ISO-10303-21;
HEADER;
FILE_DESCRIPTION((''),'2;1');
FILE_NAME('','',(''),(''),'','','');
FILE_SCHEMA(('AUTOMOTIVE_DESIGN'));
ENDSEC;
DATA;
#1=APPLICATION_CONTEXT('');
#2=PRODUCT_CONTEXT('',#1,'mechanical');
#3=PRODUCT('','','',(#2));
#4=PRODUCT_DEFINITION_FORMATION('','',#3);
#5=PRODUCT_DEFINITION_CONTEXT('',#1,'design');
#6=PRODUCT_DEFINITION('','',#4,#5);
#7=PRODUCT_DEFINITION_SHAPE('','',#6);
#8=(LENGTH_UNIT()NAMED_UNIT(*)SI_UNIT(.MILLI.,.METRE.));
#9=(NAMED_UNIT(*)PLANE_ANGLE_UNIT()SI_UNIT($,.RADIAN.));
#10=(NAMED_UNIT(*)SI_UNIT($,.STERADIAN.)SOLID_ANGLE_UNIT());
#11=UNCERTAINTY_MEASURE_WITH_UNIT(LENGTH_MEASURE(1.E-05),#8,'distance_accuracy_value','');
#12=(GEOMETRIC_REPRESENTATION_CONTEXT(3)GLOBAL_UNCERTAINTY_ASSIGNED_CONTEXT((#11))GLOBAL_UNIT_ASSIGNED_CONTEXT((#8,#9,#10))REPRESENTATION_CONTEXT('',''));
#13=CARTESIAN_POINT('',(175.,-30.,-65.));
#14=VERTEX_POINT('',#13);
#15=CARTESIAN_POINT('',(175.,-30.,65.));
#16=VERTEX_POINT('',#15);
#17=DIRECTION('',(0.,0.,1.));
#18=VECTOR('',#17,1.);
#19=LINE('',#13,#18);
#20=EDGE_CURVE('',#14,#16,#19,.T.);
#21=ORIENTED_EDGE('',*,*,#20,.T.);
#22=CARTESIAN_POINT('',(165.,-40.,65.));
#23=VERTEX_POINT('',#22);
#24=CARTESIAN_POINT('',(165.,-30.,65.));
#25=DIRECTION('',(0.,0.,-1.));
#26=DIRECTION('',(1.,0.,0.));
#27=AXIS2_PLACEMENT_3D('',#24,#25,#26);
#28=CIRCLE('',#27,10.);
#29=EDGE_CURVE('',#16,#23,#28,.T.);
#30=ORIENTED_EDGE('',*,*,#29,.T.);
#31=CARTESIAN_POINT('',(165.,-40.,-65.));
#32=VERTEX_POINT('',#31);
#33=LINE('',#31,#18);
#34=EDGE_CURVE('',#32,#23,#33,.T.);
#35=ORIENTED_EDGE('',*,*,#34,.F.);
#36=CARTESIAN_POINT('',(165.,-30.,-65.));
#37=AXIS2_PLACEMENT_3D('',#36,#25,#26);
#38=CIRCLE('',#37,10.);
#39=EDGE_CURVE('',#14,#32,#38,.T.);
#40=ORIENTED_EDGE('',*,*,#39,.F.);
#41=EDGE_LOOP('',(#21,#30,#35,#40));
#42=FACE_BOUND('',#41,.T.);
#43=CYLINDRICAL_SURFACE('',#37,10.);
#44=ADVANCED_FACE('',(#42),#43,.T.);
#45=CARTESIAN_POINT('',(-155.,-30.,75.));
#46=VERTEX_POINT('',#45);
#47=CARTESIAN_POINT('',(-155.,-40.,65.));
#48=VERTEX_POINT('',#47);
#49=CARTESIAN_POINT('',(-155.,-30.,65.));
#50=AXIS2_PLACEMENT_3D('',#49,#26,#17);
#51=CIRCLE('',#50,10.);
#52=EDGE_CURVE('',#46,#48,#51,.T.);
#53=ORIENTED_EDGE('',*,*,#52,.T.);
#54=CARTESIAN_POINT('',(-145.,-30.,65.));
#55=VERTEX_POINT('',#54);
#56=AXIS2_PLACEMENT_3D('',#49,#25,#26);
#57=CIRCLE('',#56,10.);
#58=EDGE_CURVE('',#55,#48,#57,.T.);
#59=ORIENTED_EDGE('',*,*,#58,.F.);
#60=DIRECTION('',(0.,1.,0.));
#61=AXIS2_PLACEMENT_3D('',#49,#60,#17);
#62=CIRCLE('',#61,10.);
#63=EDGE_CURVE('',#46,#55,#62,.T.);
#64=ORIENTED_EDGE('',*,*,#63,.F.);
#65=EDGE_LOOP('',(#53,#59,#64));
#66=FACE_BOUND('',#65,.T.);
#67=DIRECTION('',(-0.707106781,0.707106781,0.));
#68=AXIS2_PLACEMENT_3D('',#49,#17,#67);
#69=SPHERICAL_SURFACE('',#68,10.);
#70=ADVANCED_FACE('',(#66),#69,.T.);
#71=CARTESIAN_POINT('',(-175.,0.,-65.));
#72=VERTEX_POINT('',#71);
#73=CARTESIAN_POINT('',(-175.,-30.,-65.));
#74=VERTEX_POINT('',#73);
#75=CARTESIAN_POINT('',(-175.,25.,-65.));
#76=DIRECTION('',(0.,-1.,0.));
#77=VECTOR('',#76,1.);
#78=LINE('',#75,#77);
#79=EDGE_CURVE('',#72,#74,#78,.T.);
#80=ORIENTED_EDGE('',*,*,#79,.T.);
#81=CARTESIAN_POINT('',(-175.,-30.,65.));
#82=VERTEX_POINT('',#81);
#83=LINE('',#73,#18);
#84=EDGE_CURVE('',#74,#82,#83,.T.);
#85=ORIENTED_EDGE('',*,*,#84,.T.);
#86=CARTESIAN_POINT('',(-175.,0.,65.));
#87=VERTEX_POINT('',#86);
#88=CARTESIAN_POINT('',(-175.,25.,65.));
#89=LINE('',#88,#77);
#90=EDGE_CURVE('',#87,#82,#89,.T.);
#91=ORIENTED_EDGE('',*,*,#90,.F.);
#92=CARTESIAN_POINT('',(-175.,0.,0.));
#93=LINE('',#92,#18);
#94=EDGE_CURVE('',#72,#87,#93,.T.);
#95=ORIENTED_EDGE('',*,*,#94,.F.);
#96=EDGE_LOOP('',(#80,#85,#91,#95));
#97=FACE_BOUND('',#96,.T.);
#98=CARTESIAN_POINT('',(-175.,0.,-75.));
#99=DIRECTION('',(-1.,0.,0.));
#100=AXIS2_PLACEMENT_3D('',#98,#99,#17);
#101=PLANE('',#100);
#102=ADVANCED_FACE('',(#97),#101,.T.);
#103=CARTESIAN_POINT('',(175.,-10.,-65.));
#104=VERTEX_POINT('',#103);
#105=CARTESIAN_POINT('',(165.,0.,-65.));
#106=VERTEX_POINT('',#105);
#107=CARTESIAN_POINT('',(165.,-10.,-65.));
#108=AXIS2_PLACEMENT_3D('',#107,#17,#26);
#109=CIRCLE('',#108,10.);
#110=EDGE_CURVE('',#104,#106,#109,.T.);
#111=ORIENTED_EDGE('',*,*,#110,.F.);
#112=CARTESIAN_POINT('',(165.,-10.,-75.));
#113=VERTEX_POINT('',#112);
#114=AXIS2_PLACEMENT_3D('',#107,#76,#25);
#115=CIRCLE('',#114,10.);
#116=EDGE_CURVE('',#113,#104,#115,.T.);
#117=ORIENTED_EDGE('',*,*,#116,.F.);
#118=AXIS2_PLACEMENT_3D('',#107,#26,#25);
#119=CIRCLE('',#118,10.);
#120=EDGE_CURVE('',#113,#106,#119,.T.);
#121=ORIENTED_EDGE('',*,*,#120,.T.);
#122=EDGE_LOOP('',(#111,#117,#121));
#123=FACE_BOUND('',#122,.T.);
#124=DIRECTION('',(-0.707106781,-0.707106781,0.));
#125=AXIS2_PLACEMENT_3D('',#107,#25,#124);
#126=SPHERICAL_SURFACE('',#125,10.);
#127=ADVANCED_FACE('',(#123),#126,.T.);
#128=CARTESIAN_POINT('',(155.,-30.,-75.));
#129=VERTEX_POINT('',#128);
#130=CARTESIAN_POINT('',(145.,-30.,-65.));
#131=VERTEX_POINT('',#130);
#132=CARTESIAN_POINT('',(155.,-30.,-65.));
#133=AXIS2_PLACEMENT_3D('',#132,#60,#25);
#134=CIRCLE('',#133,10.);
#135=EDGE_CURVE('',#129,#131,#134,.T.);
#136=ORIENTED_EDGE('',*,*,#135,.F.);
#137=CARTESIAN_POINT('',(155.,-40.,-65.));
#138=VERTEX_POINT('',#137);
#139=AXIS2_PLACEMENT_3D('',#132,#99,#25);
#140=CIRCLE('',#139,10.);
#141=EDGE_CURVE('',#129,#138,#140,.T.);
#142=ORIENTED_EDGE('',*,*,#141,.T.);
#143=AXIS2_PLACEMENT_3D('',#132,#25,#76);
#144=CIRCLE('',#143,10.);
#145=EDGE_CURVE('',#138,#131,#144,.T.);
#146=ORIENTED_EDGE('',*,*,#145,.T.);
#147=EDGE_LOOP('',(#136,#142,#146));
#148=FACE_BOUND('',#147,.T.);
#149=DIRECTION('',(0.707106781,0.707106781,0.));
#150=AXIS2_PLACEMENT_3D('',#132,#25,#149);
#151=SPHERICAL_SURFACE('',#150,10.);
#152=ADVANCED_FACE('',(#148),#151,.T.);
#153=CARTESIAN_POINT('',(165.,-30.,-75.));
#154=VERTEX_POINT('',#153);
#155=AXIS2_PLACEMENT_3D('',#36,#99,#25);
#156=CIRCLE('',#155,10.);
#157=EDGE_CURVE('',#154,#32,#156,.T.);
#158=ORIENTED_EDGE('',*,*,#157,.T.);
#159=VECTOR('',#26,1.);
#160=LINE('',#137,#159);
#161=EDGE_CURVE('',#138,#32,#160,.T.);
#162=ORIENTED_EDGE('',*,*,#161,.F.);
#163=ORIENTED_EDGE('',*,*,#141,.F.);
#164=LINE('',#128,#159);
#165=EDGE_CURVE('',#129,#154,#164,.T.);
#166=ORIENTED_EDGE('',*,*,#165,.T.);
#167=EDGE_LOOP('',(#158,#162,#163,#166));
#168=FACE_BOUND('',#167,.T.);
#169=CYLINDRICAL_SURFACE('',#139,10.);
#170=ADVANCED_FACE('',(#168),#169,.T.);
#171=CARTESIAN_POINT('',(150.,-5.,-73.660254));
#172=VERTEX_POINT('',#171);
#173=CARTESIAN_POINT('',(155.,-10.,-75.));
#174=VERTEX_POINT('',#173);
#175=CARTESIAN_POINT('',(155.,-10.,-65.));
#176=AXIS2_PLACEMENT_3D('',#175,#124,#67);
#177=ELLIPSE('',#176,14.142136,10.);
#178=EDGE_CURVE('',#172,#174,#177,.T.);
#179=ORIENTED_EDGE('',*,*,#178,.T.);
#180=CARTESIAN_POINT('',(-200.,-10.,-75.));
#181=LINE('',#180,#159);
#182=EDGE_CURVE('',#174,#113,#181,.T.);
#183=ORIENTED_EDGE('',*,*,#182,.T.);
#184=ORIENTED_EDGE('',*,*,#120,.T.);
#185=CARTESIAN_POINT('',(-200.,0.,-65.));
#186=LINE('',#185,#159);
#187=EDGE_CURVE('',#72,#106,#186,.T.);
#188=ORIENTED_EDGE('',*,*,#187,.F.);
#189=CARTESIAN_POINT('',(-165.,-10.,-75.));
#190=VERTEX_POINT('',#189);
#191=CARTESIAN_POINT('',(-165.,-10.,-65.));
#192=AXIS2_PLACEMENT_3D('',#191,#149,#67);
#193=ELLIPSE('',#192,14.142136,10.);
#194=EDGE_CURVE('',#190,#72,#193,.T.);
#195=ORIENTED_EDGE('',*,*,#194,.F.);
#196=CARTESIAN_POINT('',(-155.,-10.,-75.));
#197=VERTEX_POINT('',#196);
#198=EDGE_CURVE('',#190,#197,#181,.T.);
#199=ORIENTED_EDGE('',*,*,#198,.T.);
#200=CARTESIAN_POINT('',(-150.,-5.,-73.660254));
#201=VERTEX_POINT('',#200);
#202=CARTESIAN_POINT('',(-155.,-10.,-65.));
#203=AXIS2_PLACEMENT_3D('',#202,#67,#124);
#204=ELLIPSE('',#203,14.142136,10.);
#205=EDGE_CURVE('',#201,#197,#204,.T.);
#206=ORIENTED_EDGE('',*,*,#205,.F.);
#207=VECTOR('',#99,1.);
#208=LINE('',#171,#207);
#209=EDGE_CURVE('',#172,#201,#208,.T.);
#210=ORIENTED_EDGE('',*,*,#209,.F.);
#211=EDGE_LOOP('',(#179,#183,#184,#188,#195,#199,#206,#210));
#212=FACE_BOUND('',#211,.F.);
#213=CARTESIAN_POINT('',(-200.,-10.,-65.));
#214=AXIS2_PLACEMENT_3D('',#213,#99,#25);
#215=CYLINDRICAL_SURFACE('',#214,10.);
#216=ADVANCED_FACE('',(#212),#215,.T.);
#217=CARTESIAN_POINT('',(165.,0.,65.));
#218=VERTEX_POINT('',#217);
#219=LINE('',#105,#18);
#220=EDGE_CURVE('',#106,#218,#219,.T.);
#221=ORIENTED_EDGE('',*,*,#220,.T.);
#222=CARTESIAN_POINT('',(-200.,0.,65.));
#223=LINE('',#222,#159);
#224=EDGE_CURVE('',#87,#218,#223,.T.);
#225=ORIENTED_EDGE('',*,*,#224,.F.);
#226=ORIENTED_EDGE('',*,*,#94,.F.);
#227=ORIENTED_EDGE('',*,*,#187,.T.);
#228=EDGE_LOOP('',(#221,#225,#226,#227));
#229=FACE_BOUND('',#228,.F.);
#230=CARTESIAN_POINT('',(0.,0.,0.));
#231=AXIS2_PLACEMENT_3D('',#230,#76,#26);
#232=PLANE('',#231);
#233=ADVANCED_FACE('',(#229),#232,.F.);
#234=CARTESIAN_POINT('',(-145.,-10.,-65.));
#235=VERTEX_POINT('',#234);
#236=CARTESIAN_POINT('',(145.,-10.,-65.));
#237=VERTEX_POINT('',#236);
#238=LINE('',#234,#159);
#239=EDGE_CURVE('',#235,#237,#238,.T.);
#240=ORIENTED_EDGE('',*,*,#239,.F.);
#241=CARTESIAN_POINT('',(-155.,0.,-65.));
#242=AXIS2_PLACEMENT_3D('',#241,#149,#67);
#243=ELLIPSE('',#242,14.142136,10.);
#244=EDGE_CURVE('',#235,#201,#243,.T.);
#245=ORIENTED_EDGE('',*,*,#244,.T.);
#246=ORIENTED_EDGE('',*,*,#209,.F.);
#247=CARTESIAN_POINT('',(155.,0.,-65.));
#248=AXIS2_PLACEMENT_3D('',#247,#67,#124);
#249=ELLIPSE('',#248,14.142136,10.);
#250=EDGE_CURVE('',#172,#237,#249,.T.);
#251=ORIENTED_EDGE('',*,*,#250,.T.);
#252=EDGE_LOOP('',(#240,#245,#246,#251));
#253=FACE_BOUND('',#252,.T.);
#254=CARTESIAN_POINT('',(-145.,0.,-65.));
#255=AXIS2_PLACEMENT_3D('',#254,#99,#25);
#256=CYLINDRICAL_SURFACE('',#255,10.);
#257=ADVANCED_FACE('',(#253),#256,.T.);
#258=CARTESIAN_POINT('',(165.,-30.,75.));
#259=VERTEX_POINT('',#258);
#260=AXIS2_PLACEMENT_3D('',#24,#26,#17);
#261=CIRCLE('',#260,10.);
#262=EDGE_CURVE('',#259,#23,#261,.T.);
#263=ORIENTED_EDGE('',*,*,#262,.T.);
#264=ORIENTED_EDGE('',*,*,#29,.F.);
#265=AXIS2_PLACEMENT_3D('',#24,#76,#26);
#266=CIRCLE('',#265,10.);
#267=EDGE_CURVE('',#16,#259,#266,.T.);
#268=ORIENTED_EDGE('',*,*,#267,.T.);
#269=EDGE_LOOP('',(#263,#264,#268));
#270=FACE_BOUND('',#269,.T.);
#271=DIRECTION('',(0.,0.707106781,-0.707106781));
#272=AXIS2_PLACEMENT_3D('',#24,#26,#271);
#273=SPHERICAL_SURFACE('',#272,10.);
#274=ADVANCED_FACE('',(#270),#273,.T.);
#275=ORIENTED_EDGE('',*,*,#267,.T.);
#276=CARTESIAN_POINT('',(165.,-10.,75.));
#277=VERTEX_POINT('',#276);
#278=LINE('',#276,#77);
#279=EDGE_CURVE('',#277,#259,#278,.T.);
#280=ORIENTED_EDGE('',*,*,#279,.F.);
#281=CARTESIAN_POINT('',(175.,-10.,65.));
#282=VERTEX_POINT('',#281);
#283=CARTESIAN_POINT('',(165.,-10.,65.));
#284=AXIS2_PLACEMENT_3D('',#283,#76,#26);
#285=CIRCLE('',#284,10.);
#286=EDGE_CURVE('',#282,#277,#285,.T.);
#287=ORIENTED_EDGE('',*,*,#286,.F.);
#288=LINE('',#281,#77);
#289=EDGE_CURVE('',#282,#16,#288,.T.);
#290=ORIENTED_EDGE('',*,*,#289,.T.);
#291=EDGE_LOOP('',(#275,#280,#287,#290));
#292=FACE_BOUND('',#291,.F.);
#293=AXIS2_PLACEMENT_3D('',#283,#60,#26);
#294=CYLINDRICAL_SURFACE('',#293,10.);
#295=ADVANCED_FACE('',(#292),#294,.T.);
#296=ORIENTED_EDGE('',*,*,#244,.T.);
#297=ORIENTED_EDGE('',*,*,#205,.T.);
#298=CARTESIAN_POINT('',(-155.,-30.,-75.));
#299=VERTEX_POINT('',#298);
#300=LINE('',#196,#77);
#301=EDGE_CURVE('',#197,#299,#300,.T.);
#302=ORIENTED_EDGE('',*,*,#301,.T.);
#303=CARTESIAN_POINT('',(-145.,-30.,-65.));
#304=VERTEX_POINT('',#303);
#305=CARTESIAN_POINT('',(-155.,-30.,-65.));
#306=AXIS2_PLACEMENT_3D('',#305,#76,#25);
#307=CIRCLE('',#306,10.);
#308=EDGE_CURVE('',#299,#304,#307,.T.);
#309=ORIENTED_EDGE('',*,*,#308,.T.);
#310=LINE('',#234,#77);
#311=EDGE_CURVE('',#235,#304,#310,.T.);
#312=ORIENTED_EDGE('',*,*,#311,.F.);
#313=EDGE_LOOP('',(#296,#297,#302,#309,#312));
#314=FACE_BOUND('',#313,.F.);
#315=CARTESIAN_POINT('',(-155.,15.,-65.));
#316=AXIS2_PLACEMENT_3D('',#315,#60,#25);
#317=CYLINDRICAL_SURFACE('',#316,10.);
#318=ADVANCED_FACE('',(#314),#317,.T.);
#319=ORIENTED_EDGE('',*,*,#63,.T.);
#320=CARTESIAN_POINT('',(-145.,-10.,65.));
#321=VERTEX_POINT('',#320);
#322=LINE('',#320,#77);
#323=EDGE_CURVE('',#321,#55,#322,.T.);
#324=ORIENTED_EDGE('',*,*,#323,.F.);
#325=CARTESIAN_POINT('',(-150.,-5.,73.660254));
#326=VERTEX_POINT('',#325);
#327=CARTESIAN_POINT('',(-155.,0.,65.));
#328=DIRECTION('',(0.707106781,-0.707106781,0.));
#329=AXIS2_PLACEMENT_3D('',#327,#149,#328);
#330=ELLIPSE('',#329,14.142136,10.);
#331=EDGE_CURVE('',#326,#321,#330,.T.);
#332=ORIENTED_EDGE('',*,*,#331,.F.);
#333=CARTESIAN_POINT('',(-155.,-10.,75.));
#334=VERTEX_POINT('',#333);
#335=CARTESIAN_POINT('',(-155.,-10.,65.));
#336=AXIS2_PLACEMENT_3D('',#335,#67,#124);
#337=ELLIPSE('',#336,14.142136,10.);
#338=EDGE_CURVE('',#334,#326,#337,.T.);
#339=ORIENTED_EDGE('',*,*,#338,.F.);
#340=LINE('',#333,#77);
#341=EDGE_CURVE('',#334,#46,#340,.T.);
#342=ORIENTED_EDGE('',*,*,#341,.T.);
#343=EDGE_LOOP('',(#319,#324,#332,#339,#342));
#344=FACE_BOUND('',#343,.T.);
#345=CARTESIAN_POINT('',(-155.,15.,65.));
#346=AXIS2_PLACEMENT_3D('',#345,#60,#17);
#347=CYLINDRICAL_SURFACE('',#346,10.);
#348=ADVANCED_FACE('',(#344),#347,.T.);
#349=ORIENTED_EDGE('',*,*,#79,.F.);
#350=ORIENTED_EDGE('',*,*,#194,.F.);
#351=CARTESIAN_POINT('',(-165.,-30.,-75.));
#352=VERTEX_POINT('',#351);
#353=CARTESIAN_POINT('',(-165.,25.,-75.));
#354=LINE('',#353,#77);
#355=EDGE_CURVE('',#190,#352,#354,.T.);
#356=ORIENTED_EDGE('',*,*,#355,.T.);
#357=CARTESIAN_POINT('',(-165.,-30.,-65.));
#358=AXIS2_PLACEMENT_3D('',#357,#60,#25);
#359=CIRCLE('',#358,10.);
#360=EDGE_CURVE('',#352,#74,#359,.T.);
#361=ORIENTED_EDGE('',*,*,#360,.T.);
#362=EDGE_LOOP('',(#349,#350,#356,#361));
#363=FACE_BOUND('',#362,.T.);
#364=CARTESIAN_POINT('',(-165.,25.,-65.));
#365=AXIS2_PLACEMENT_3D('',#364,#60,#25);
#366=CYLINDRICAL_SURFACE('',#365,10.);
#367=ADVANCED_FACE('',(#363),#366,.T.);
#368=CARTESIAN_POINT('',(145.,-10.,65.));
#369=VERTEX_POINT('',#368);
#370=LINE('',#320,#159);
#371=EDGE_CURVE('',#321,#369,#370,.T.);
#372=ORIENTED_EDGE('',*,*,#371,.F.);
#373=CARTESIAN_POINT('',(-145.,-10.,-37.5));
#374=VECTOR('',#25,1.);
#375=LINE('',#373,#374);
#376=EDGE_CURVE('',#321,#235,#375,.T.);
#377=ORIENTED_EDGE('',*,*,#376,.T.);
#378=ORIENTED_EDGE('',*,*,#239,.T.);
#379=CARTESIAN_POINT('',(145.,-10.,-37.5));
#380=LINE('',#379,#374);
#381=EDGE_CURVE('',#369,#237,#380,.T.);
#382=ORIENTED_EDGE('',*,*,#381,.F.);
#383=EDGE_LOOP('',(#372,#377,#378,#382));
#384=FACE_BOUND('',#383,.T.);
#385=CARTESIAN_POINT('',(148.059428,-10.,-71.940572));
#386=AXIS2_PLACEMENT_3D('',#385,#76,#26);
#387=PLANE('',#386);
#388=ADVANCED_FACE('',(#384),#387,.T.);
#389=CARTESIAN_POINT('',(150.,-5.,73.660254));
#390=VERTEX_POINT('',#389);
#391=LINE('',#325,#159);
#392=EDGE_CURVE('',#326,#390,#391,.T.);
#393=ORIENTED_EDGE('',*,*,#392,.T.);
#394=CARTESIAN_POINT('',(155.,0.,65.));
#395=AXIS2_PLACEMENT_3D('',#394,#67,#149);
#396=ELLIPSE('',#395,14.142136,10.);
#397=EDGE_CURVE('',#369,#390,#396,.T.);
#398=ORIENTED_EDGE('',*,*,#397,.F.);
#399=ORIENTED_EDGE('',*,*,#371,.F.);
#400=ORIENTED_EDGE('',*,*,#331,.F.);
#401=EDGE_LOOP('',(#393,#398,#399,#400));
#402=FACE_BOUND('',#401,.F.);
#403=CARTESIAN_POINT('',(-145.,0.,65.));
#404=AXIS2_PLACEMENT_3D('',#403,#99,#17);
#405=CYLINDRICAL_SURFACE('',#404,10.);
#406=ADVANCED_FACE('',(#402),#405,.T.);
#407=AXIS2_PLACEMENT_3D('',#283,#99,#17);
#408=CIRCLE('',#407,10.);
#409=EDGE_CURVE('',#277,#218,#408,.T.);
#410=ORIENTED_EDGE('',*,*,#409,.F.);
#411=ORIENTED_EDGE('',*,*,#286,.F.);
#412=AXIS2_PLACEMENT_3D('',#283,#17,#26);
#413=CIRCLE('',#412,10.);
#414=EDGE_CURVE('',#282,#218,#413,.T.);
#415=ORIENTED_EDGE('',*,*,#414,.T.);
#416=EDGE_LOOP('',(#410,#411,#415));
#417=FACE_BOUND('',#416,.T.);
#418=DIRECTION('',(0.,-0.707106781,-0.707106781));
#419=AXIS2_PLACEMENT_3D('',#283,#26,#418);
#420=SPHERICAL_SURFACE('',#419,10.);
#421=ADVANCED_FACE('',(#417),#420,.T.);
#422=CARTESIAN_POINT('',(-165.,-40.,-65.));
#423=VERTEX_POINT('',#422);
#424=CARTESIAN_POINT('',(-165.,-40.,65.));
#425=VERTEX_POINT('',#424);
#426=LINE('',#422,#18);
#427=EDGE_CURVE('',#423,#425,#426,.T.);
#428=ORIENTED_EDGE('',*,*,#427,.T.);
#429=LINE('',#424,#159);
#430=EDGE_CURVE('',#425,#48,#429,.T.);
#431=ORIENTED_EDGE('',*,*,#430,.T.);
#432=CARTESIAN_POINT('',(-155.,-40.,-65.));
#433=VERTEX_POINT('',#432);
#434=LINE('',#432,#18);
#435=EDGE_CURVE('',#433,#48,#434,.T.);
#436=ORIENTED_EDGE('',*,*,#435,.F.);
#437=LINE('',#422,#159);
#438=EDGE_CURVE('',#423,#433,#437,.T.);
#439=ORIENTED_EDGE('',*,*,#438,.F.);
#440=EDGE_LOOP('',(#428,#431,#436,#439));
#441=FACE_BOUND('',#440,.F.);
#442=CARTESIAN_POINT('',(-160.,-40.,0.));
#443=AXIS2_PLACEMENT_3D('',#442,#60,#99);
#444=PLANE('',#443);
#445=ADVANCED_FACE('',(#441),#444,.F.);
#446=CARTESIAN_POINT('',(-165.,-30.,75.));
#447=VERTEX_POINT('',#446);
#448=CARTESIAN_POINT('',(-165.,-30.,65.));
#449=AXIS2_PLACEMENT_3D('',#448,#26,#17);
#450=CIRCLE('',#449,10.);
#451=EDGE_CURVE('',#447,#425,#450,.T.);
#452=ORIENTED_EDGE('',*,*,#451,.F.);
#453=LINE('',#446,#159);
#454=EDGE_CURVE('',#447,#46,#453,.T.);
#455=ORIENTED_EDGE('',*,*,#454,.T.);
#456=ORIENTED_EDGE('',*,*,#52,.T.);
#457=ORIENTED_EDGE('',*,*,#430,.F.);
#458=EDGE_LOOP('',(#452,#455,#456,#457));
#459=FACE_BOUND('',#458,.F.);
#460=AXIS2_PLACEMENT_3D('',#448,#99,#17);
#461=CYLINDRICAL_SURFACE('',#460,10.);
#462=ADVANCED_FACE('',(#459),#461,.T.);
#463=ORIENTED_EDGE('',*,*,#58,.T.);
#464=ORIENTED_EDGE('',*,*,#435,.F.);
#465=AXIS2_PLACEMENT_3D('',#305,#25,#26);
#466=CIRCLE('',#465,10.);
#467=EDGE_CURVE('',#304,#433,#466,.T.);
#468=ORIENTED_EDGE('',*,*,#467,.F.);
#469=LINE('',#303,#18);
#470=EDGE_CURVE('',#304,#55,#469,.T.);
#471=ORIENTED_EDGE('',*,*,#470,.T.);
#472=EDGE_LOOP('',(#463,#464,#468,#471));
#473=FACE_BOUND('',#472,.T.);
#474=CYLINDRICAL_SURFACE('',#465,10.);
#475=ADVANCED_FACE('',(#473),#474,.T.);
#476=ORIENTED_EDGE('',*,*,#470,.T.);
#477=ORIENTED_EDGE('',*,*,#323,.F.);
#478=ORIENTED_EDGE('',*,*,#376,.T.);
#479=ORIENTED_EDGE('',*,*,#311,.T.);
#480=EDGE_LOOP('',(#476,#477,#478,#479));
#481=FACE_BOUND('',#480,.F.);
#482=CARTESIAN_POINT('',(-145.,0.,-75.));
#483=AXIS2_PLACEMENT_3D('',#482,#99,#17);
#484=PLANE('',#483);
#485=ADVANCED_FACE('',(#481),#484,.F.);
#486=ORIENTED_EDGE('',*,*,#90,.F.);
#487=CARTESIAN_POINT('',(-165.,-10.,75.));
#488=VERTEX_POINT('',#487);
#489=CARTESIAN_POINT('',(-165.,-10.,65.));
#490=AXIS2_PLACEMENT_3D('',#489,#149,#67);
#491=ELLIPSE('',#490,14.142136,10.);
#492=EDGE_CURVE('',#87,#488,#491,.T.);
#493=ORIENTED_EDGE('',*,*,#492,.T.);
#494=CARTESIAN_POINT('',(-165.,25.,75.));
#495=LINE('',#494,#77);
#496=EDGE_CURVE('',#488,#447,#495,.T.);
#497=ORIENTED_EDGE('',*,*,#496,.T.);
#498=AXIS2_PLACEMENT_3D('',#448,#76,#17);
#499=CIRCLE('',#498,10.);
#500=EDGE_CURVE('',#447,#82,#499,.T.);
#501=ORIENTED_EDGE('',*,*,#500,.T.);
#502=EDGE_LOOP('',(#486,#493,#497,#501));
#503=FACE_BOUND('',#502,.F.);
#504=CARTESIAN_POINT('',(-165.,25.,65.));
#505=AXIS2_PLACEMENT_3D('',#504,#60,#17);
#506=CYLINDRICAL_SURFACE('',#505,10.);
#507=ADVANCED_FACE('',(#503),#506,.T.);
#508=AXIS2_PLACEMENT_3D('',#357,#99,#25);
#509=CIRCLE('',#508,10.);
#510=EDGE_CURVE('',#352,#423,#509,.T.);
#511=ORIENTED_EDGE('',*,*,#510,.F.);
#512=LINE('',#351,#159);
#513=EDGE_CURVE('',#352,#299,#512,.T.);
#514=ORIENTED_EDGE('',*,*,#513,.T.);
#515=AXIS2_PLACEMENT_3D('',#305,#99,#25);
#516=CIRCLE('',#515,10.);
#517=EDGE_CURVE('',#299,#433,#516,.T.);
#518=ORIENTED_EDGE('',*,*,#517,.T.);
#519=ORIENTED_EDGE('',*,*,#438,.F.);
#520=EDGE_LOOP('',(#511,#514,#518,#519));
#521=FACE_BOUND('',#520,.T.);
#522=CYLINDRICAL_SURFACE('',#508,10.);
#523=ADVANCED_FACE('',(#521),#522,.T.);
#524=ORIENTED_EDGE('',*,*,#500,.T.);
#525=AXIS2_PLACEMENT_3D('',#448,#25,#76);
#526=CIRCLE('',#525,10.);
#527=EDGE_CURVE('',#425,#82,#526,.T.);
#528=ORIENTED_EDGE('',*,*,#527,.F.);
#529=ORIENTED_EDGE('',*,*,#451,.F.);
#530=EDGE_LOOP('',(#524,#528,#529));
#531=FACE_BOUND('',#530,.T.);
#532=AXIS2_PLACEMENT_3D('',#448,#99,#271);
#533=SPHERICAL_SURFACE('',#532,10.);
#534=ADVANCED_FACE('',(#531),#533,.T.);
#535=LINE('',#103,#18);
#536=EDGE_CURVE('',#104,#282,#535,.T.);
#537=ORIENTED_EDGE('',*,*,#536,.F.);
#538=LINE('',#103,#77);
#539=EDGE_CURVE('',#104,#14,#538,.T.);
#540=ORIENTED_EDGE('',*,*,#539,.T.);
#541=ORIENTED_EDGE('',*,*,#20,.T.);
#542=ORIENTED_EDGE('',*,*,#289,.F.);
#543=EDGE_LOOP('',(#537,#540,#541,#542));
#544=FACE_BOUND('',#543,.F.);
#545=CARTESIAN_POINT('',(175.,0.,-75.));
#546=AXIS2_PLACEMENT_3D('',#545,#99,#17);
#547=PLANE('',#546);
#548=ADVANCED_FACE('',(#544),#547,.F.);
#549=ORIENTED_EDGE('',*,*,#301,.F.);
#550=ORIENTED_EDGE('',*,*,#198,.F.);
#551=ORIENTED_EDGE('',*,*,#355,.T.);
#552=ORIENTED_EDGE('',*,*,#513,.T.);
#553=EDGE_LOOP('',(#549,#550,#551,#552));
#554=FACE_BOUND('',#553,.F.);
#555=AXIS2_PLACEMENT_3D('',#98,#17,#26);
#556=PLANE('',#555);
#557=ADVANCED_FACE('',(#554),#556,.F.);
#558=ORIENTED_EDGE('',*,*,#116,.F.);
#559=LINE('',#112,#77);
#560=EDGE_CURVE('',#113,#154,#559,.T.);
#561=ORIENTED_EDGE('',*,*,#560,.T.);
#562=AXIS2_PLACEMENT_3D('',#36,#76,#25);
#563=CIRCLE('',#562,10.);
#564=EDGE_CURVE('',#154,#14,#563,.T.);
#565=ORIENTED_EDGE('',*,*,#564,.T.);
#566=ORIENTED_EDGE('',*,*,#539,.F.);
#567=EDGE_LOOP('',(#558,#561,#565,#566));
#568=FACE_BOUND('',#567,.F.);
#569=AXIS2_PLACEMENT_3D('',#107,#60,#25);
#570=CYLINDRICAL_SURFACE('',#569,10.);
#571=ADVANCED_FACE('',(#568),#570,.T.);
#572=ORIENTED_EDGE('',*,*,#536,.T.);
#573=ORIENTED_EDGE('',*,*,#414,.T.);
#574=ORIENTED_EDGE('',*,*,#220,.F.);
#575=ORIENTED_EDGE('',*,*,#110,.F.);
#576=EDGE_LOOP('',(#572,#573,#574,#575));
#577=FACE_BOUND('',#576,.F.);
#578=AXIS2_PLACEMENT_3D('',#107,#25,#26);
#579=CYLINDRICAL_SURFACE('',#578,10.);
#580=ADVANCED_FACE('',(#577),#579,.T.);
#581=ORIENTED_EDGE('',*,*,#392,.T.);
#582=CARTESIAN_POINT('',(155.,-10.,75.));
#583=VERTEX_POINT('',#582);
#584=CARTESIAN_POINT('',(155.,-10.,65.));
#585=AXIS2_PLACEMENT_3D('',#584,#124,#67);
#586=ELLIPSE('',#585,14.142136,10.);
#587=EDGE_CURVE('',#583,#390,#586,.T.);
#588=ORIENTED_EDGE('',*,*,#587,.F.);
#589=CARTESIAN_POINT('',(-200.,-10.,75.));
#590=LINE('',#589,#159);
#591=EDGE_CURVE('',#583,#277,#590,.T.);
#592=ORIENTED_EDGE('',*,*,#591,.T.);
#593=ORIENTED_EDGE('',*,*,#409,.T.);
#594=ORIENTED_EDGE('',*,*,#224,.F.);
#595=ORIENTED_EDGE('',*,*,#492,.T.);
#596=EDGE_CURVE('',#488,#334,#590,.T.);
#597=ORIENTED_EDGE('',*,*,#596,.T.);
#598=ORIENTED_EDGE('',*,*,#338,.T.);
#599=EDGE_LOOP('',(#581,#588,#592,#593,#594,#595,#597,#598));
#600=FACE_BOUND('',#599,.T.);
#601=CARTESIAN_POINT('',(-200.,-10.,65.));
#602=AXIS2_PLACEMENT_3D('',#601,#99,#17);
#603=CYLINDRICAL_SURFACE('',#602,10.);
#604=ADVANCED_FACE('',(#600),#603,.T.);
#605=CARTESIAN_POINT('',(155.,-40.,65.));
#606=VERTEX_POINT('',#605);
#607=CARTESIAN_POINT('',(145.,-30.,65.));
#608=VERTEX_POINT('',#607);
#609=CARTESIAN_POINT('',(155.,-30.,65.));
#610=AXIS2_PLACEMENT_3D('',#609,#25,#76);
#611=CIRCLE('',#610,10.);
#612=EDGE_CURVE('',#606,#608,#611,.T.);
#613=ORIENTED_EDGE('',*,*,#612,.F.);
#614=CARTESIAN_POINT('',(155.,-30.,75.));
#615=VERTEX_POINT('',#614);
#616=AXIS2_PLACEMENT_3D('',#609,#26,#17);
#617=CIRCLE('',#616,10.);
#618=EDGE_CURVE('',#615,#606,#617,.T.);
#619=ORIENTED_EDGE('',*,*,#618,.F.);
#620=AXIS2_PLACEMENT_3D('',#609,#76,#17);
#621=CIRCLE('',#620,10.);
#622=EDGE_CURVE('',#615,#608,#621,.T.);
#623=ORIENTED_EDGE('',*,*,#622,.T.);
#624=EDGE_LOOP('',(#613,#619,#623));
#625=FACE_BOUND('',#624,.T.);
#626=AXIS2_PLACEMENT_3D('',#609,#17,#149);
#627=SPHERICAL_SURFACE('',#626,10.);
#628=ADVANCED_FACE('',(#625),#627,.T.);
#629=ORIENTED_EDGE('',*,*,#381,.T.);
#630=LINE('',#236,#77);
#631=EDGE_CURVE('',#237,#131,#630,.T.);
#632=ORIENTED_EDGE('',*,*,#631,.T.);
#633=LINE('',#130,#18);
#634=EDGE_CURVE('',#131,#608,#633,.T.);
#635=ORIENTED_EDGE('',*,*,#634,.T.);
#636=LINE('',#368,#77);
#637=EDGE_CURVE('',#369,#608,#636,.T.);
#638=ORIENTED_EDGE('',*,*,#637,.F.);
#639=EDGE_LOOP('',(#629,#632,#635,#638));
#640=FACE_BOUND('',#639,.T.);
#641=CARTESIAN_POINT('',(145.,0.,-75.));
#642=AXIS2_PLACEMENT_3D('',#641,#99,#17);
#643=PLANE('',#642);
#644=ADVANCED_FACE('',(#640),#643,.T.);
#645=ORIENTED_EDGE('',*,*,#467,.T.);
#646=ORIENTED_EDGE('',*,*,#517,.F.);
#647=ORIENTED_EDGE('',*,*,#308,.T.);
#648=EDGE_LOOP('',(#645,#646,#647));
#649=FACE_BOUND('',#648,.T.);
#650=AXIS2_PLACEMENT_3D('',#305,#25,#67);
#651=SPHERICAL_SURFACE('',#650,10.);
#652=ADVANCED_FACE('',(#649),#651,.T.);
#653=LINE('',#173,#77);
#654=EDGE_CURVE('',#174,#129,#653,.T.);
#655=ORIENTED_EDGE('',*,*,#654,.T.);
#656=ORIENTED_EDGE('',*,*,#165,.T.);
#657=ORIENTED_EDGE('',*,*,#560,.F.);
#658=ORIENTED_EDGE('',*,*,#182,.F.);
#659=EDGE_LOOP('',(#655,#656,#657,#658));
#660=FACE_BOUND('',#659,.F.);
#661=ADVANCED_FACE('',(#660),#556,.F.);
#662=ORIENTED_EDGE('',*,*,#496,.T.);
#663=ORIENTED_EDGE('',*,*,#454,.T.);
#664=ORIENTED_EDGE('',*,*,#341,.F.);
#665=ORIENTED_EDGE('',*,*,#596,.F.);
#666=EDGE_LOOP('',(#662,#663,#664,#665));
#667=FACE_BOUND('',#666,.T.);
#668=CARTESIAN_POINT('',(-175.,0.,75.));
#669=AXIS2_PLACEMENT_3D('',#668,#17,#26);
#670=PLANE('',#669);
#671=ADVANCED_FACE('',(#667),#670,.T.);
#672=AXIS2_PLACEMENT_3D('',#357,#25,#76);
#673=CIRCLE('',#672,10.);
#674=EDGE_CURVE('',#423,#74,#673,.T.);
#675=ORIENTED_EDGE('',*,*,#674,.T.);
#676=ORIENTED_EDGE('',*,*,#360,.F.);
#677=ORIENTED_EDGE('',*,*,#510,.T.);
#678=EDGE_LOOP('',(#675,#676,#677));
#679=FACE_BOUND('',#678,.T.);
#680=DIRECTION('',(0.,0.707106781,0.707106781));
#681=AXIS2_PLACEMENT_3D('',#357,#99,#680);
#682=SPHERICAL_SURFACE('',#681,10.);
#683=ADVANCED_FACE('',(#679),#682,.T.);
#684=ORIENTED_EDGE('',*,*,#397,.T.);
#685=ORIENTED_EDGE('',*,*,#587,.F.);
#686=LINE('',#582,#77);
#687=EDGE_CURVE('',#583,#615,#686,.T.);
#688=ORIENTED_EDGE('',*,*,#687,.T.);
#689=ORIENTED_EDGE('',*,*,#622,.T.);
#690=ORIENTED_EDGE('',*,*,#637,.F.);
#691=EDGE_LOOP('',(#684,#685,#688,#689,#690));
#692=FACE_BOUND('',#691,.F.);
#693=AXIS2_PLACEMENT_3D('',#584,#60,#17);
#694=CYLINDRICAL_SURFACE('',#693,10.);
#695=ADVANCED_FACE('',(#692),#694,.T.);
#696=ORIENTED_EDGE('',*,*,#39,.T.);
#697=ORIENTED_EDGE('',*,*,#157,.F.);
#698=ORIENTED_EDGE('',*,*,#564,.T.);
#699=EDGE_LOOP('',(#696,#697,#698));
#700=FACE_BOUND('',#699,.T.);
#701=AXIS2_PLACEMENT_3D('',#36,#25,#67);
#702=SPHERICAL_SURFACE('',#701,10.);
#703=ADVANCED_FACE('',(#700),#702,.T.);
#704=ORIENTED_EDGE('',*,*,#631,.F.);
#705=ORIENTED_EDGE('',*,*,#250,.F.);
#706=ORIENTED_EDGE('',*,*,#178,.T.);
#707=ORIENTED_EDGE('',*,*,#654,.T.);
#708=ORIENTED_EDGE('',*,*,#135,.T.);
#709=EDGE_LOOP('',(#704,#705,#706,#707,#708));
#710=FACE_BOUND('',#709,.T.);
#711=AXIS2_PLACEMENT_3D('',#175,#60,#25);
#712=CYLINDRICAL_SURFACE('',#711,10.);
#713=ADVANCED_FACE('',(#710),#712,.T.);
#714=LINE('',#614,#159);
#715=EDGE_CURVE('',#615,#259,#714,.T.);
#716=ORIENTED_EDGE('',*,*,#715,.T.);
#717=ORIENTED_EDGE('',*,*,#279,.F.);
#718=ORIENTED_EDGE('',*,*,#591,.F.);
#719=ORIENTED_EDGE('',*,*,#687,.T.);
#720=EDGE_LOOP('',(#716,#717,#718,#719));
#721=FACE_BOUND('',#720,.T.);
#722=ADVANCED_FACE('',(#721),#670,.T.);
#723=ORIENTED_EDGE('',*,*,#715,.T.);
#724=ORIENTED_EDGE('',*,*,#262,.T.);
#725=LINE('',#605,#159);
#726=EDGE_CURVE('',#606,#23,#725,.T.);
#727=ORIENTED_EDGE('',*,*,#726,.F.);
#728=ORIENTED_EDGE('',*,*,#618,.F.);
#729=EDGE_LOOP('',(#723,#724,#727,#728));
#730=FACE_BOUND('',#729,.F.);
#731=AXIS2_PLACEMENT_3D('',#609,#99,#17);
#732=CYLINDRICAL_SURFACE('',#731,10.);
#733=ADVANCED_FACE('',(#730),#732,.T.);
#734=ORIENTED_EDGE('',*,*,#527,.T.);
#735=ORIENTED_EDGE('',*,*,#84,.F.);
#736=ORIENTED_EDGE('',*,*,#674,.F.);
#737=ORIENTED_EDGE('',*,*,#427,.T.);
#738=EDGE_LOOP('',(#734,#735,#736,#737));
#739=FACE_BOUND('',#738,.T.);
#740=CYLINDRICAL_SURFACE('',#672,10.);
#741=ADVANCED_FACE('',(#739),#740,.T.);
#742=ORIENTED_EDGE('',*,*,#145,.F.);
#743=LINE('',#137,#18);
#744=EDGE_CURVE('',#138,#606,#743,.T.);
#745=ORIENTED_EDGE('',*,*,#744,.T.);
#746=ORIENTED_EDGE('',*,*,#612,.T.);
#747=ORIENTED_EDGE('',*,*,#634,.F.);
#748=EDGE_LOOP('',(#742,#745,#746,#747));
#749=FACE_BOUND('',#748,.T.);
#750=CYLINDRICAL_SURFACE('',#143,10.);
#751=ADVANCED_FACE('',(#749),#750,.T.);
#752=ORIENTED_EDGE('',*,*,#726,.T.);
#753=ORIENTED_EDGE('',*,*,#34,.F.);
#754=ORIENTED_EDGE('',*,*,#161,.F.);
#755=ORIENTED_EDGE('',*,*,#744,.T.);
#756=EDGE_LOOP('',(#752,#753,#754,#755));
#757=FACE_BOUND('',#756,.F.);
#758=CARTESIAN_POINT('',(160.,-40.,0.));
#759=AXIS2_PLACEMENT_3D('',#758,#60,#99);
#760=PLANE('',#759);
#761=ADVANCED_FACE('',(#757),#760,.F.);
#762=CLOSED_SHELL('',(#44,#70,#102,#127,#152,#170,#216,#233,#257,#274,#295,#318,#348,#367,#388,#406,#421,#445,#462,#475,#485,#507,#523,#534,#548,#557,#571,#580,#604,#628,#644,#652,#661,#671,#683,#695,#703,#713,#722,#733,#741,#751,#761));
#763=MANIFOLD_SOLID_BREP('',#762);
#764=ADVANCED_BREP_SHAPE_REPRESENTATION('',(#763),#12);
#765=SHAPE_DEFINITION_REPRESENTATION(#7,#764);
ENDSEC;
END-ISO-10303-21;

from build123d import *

# Parameters (mm, degrees)
F0_W          = 350
F0_H          = 150
F1_DEPTH      = 10
F2_W          = 30
F2_H          = 150
F3_DEPTH      = 40
F4_T1_DEPTH   = 10
F4_T3_DEPTH   = 20
F4_T5_DEPTH   = 130
F4_T7_DEPTH   = 55
F4_T9_DEPTH   = 365
F4_T11_DEPTH  = 290
F4_T13_DEPTH  = 10
F4_S17_W      = 10.2
F4_S17_H      = 10.2
F4_T18_DEPTH  = 10.2
F4_S23_W      = 10.2
F4_S23_H      = 10.2
F4_T24_DEPTH  = 10.2
F4_S29_W      = 10.2
F4_S29_H      = 10.2
F4_T30_DEPTH  = 10.2
F4_S35_W      = 10.2
F4_S35_H      = 10.2
F4_T36_DEPTH  = 10.2
F4_S41_W      = 10.2
F4_S41_H      = 10.2
F4_T42_DEPTH  = 10.2
F4_S47_W      = 10.2
F4_S47_H      = 10.2
F4_T48_DEPTH  = 10.2
F4_S53_W      = 10.2
F4_S53_H      = 10.2
F4_T54_DEPTH  = 10.2
F4_S59_W      = 10.2
F4_S59_H      = 10.2
F4_T60_DEPTH  = 10.2
F4_S65_W      = 10.2
F4_S65_H      = 10.2
F4_T66_DEPTH  = 10.2
F4_S71_W      = 10.2
F4_S71_H      = 10.2
F4_T72_DEPTH  = 10.2
F4_T79_DEPTH  = 45
F4_T84_DEPTH  = 315
F4_T91_DEPTH  = 315
F4_T95_DEPTH  = 45
F4_T103_DEPTH = 45
F4_T108_DEPTH = 315
F4_T115_DEPTH = 315
F4_T119_DEPTH = 45


# Not quite as in the source:
# - a fillet or chamfer that OpenCascade refuses, or shapes differently, is made with other operations: its cross-section is extruded or revolved along the edge and cut away or added


with BuildPart() as f1:
    # F0 (on Front) → F1 (new body)
    with BuildSketch(Plane.XZ):
        Rectangle(F0_W, F0_H)
    extrude(amount=F1_DEPTH)

    # F2 (on face) → F3 (join)
    with BuildSketch(Plane(origin=(0, 0, 0), x_dir=(-1, 0, 0), z_dir=(0, 1, 0))):
        with Locations((-160, 0)):
            Rectangle(F2_W, F2_H)
        with Locations((160, 0)):
            Rectangle(F2_W, F2_H)
    extrude(amount=-F3_DEPTH)

    # F4: fillet of radius 10 on 21 edges, made by hand

    # F4_s2 → F4_t1 (cut)
    with BuildSketch(Plane.YZ.offset(155)):
        with BuildLine():
            ThreePointArc((-30, 75), (-37.0710678119, 72.0710678119), (-40, 65))
            Line((-40, 65), (-40, 75))
            Line((-40, 75), (-30, 75))
        make_face()
        with BuildLine():
            ThreePointArc((-30, -75), (-37.0710678119, -72.0710678119), (-40, -65))
            Line((-40, -65), (-40, -75))
            Line((-40, -75), (-30, -75))
        make_face()
    extrude(amount=F4_T1_DEPTH, mode=Mode.SUBTRACT)

    # F4_s4 → F4_t3 (cut)
    with BuildSketch(Plane.XZ.offset(10)):
        with BuildLine():
            ThreePointArc((155, 75), (147.9289321881, 72.0710678119), (145, 65))
            Line((145, 65), (145, 75))
            Line((145, 75), (155, 75))
        make_face()
        with BuildLine():
            ThreePointArc((165, -75), (172.0710678119, -72.0710678119), (175, -65))
            Line((175, -65), (175, -75))
            Line((175, -75), (165, -75))
        make_face()
        with BuildLine():
            ThreePointArc((155, -75), (147.9289321881, -72.0710678119), (145, -65))
            Line((145, -65), (145, -75))
            Line((145, -75), (155, -75))
        make_face()
        with BuildLine():
            ThreePointArc((175, 65), (172.0710678119, 72.0710678119), (165, 75))
            Line((165, 75), (175, 75))
            Line((175, 75), (175, 65))
        make_face()
        with BuildLine():
            ThreePointArc((-155, -75), (-147.9289321881, -72.0710678119), (-145, -65))
            Line((-145, -65), (-145, -75))
            Line((-145, -75), (-155, -75))
        make_face()
        with BuildLine():
            ThreePointArc((-155, 75), (-147.9289321881, 72.0710678119), (-145, 65))
            Line((-145, 65), (-145, 75))
            Line((-145, 75), (-155, 75))
        make_face()
    extrude(amount=F4_T3_DEPTH, mode=Mode.SUBTRACT)

    # F4_s6 → F4_t5 (cut)
    with BuildSketch(Plane.XY.offset(-65)):
        with BuildLine():
            ThreePointArc((175, -30), (172.0710678119, -37.0710678119), (165, -40))
            Line((165, -40), (175, -40))
            Line((175, -40), (175, -30))
        make_face()
        with BuildLine():
            ThreePointArc((175, -10), (172.0710678119, -2.9289321881), (165, 0))
            Line((165, 0), (175, 0))
            Line((175, 0), (175, -10))
        make_face()
        with BuildLine():
            ThreePointArc((-165, -40), (-172.0710678119, -37.0710678119), (-175, -30))
            Line((-175, -30), (-175, -40))
            Line((-175, -40), (-165, -40))
        make_face()
        with BuildLine():
            ThreePointArc((155, -40), (147.9289321881, -37.0710678119), (145, -30))
            Line((145, -30), (145, -40))
            Line((145, -40), (155, -40))
        make_face()
        with BuildLine():
            ThreePointArc((-145, -30), (-147.9289321881, -37.0710678119), (-155, -40))
            Line((-155, -40), (-145, -40))
            Line((-145, -40), (-145, -30))
        make_face()
    extrude(amount=F4_T5_DEPTH, mode=Mode.SUBTRACT)

    # F4_s8 → F4_t7 (cut)
    with BuildSketch(Plane.XZ.offset(-25)):
        with BuildLine():
            ThreePointArc((-165, -75), (-172.0710678119, -72.0710678119), (-175, -65))
            Line((-175, -65), (-175, -75))
            Line((-175, -75), (-165, -75))
        make_face()
        with BuildLine():
            ThreePointArc((-165, 75), (-172.0710678119, 72.0710678119), (-175, 65))
            Line((-175, 65), (-175, 75))
            Line((-175, 75), (-165, 75))
        make_face()
    extrude(amount=F4_T7_DEPTH, mode=Mode.SUBTRACT)

    # F4_s10 → F4_t9 (cut)
    with BuildSketch(Plane.YZ.offset(-200)):
        with BuildLine():
            ThreePointArc((-10, 75), (-2.9289321881, 72.0710678119), (0, 65))
            Line((0, 65), (0, 75))
            Line((0, 75), (-10, 75))
        make_face()
        with BuildLine():
            ThreePointArc((-10, -75), (-2.9289321881, -72.0710678119), (0, -65))
            Line((0, -65), (0, -75))
            Line((0, -75), (-10, -75))
        make_face()
    extrude(amount=F4_T9_DEPTH, mode=Mode.SUBTRACT)

    # F4_s12 → F4_t11 (cut)
    with BuildSketch(Plane.YZ.offset(-145)):
        with BuildLine():
            ThreePointArc((0, 75), (-7.0710678119, 72.0710678119), (-10, 65))
            Line((-10, 65), (-10, 75))
            Line((-10, 75), (0, 75))
        make_face()
        with BuildLine():
            ThreePointArc((0, -75), (-7.0710678119, -72.0710678119), (-10, -65))
            Line((-10, -65), (-10, -75))
            Line((-10, -75), (0, -75))
        make_face()
    extrude(amount=F4_T11_DEPTH, mode=Mode.SUBTRACT)

    # F4_s14 → F4_t13 (cut)
    with BuildSketch(Plane.YZ.offset(-165)):
        with BuildLine():
            ThreePointArc((-30, 75), (-37.0710678119, 72.0710678119), (-40, 65))
            Line((-40, 65), (-40, 75))
            Line((-40, 75), (-30, 75))
        make_face()
        with BuildLine():
            ThreePointArc((-30, -75), (-37.0710678119, -72.0710678119), (-40, -65))
            Line((-40, -65), (-40, -75))
            Line((-40, -75), (-30, -75))
        make_face()
    extrude(amount=F4_T13_DEPTH, mode=Mode.SUBTRACT)


with BuildPart() as f4_tool16:
    # F4_s17 → F4_t18 (new body)
    with BuildSketch(Plane.XY.offset(65)):
        with Locations((149.9, -35.1)):
            Rectangle(F4_S17_W, F4_S17_H)
    extrude(amount=F4_T18_DEPTH)

    # F4_s19 → F4_t20 (revolve, cut)
    with BuildSketch(Plane(origin=(155, -30, 65), x_dir=(0.7071067812, 0.7071067812, 0), z_dir=(0.7071067812, -0.7071067812, 0))):
        with BuildLine():
            ThreePointArc((0, -10), (10, 0), (0, 10))
            Line((0, 10), (0, -10))
        make_face()
    revolve(axis=Axis((155, -30, 65), (0, 0, 1)), mode=Mode.SUBTRACT)


with BuildPart() as f1_1:
    add(f1.part)

    # F4_t15: cut F4_tool16
    add(f4_tool16.part, mode=Mode.SUBTRACT)


with BuildPart() as f4_tool22:
    # F4_s23 → F4_t24 (new body)
    with BuildSketch(Plane.YZ.offset(165)):
        with Locations((-35.1, 70.1)):
            Rectangle(F4_S23_W, F4_S23_H)
    extrude(amount=F4_T24_DEPTH)

    # F4_s25 → F4_t26 (revolve, cut)
    with BuildSketch(Plane(origin=(165, -30, 65), x_dir=(0, 0.7071067812, -0.7071067812), z_dir=(0, -0.7071067812, -0.7071067812))):
        with BuildLine():
            ThreePointArc((0, -10), (10, 0), (0, 10))
            Line((0, 10), (0, -10))
        make_face()
    revolve(axis=Axis((165, -30, 65), (1, 0, 0)), mode=Mode.SUBTRACT)


with BuildPart() as f1_2:
    add(f1_1.part)

    # F4_t21: cut F4_tool22
    add(f4_tool22.part, mode=Mode.SUBTRACT)


with BuildPart() as f4_tool28:
    # F4_s29 → F4_t30 (new body)
    with BuildSketch(Plane.XY.offset(-65)):
        with Locations((170.1, -4.9)):
            Rectangle(F4_S29_W, F4_S29_H)
    extrude(amount=-F4_T30_DEPTH)

    # F4_s31 → F4_t32 (revolve, cut)
    with BuildSketch(Plane(origin=(165, -10, -65), x_dir=(-0.7071067812, -0.7071067812, 0), z_dir=(0.7071067812, -0.7071067812, 0))):
        with BuildLine():
            ThreePointArc((0, -10), (10, 0), (0, 10))
            Line((0, 10), (0, -10))
        make_face()
    revolve(axis=Axis((165, -10, -65), (0, 0, -1)), mode=Mode.SUBTRACT)


with BuildPart() as f1_3:
    add(f1_2.part)

    # F4_t27: cut F4_tool28
    add(f4_tool28.part, mode=Mode.SUBTRACT)


with BuildPart() as f4_tool34:
    # F4_s35 → F4_t36 (new body)
    with BuildSketch(Plane.XY.offset(-65)):
        with Locations((170.1, -35.1)):
            Rectangle(F4_S35_W, F4_S35_H)
    extrude(amount=-F4_T36_DEPTH)

    # F4_s37 → F4_t38 (revolve, cut)
    with BuildSketch(Plane(origin=(165, -30, -65), x_dir=(-0.7071067812, 0.7071067812, 0), z_dir=(-0.7071067812, -0.7071067812, 0))):
        with BuildLine():
            ThreePointArc((0, -10), (10, 0), (0, 10))
            Line((0, 10), (0, -10))
        make_face()
    revolve(axis=Axis((165, -30, -65), (0, 0, -1)), mode=Mode.SUBTRACT)


with BuildPart() as f1_4:
    add(f1_3.part)

    # F4_t33: cut F4_tool34
    add(f4_tool34.part, mode=Mode.SUBTRACT)


with BuildPart() as f4_tool40:
    # F4_s41 → F4_t42 (new body)
    with BuildSketch(Plane.XY.offset(-65)):
        with Locations((149.9, -35.1)):
            Rectangle(F4_S41_W, F4_S41_H)
    extrude(amount=-F4_T42_DEPTH)

    # F4_s43 → F4_t44 (revolve, cut)
    with BuildSketch(Plane(origin=(155, -30, -65), x_dir=(0.7071067812, 0.7071067812, 0), z_dir=(-0.7071067812, 0.7071067812, 0))):
        with BuildLine():
            ThreePointArc((0, -10), (10, 0), (0, 10))
            Line((0, 10), (0, -10))
        make_face()
    revolve(axis=Axis((155, -30, -65), (0, 0, -1)), mode=Mode.SUBTRACT)


with BuildPart() as f1_5:
    add(f1_4.part)

    # F4_t39: cut F4_tool40
    add(f4_tool40.part, mode=Mode.SUBTRACT)


with BuildPart() as f4_tool46:
    # F4_s47 → F4_t48 (new body)
    with BuildSketch(Plane.YZ.offset(165)):
        with Locations((-4.9, 70.1)):
            Rectangle(F4_S47_W, F4_S47_H)
    extrude(amount=F4_T48_DEPTH)

    # F4_s49 → F4_t50 (revolve, cut)
    with BuildSketch(Plane(origin=(165, -10, 65), x_dir=(0, -0.7071067812, -0.7071067812), z_dir=(0, -0.7071067812, 0.7071067812))):
        with BuildLine():
            ThreePointArc((0, -10), (10, 0), (0, 10))
            Line((0, 10), (0, -10))
        make_face()
    revolve(axis=Axis((165, -10, 65), (1, 0, 0)), mode=Mode.SUBTRACT)


with BuildPart() as f1_6:
    add(f1_5.part)

    # F4_t45: cut F4_tool46
    add(f4_tool46.part, mode=Mode.SUBTRACT)


with BuildPart() as f4_tool52:
    # F4_s53 → F4_t54 (new body)
    with BuildSketch(Plane.XY.offset(-65)):
        with Locations((-149.9, -35.1)):
            Rectangle(F4_S53_W, F4_S53_H)
    extrude(amount=-F4_T54_DEPTH)

    # F4_s55 → F4_t56 (revolve, cut)
    with BuildSketch(Plane(origin=(-155, -30, -65), x_dir=(-0.7071067812, 0.7071067812, 0), z_dir=(-0.7071067812, -0.7071067812, 0))):
        with BuildLine():
            ThreePointArc((0, -10), (10, 0), (0, 10))
            Line((0, 10), (0, -10))
        make_face()
    revolve(axis=Axis((-155, -30, -65), (0, 0, -1)), mode=Mode.SUBTRACT)


with BuildPart() as f1_7:
    add(f1_6.part)

    # F4_t51: cut F4_tool52
    add(f4_tool52.part, mode=Mode.SUBTRACT)


with BuildPart() as f4_tool58:
    # F4_s59 → F4_t60 (new body)
    with BuildSketch(Plane.YZ.offset(-165)):
        with Locations((-35.1, -70.1)):
            Rectangle(F4_S59_W, F4_S59_H)
    extrude(amount=-F4_T60_DEPTH)

    # F4_s61 → F4_t62 (revolve, cut)
    with BuildSketch(Plane(origin=(-165, -30, -65), x_dir=(0, 0.7071067812, 0.7071067812), z_dir=(0, -0.7071067812, 0.7071067812))):
        with BuildLine():
            ThreePointArc((0, -10), (10, 0), (0, 10))
            Line((0, 10), (0, -10))
        make_face()
    revolve(axis=Axis((-165, -30, -65), (-1, 0, 0)), mode=Mode.SUBTRACT)


with BuildPart() as f1_8:
    add(f1_7.part)

    # F4_t57: cut F4_tool58
    add(f4_tool58.part, mode=Mode.SUBTRACT)


with BuildPart() as f4_tool64:
    # F4_s65 → F4_t66 (new body)
    with BuildSketch(Plane.YZ.offset(-165)):
        with Locations((-35.1, 70.1)):
            Rectangle(F4_S65_W, F4_S65_H)
    extrude(amount=-F4_T66_DEPTH)

    # F4_s67 → F4_t68 (revolve, cut)
    with BuildSketch(Plane(origin=(-165, -30, 65), x_dir=(0, 0.7071067812, -0.7071067812), z_dir=(0, 0.7071067812, 0.7071067812))):
        with BuildLine():
            ThreePointArc((0, -10), (10, 0), (0, 10))
            Line((0, 10), (0, -10))
        make_face()
    revolve(axis=Axis((-165, -30, 65), (-1, 0, 0)), mode=Mode.SUBTRACT)


with BuildPart() as f1_9:
    add(f1_8.part)

    # F4_t63: cut F4_tool64
    add(f4_tool64.part, mode=Mode.SUBTRACT)


with BuildPart() as f4_tool70:
    # F4_s71 → F4_t72 (new body)
    with BuildSketch(Plane.XY.offset(65)):
        with Locations((-149.9, -35.1)):
            Rectangle(F4_S71_W, F4_S71_H)
    extrude(amount=F4_T72_DEPTH)

    # F4_s73 → F4_t74 (revolve, cut)
    with BuildSketch(Plane(origin=(-155, -30, 65), x_dir=(-0.7071067812, 0.7071067812, 0), z_dir=(0.7071067812, 0.7071067812, 0))):
        with BuildLine():
            ThreePointArc((0, -10), (10, 0), (0, 10))
            Line((0, 10), (0, -10))
        make_face()
    revolve(axis=Axis((-155, -30, 65), (0, 0, 1)), mode=Mode.SUBTRACT)


with BuildPart() as f1_10:
    add(f1_9.part)

    # F4_t69: cut F4_tool70
    add(f4_tool70.part, mode=Mode.SUBTRACT)


with BuildPart() as f4_tool77:
    # F4_s78 → F4_t79 (new body)
    with BuildSketch(Plane.XZ.offset(-15)):
        with BuildLine():
            ThreePointArc((155, 75), (147.9289321881, 72.0710678119), (145, 65))
            Line((145, 65), (145, 75))
            Line((145, 75), (155, 75))
        make_face()
    extrude(amount=F4_T79_DEPTH)

    split(bisect_by=Plane.XZ.offset(10), keep=Keep.BOTTOM)

    split(bisect_by=Plane.XZ, keep=Keep.TOP)


with BuildPart() as f4_tool82:
    # F4_s83 → F4_t84 (new body)
    with BuildSketch(Plane.YZ.offset(170)):
        with BuildLine():
            ThreePointArc((0, 75), (-7.0710678119, 72.0710678119), (-10, 65))
            Line((-10, 65), (-10, 75))
            Line((-10, 75), (0, 75))
        make_face()
    extrude(amount=-F4_T84_DEPTH)

    split(bisect_by=Plane.YZ.offset(145), keep=Keep.TOP)


with BuildPart() as f4_tool77_1:
    add(f4_tool77.part)

    # F4_t86: intersect F4_tool82
    add(f4_tool82.part, mode=Mode.INTERSECT)


with BuildPart() as f1_11:
    add(f1_10.part)

    # F4_t75: cut F4_tool77
    add(f4_tool77_1.part, mode=Mode.SUBTRACT)


with BuildPart() as f4_tool89:
    # F4_s90 → F4_t91 (new body)
    with BuildSketch(Plane.YZ.offset(-145)):
        with BuildLine():
            ThreePointArc((0, -75), (-7.0710678119, -72.0710678119), (-10, -65))
            Line((-10, -65), (-10, -75))
            Line((-10, -75), (0, -75))
        make_face()
    extrude(amount=F4_T91_DEPTH)

    split(bisect_by=Plane.YZ.offset(145), keep=Keep.TOP)


with BuildPart() as f4_tool93:
    # F4_s94 → F4_t95 (new body)
    with BuildSketch(Plane.XZ.offset(-15)):
        with BuildLine():
            ThreePointArc((155, -75), (147.9289321881, -72.0710678119), (145, -65))
            Line((145, -65), (145, -75))
            Line((145, -75), (155, -75))
        make_face()
    extrude(amount=F4_T95_DEPTH)

    split(bisect_by=Plane.XZ.offset(10), keep=Keep.BOTTOM)

    split(bisect_by=Plane.XZ, keep=Keep.TOP)


with BuildPart() as f4_tool89_1:
    add(f4_tool89.part)

    # F4_t98: intersect F4_tool93
    add(f4_tool93.part, mode=Mode.INTERSECT)


with BuildPart() as f1_12:
    add(f1_11.part)

    # F4_t87: cut F4_tool89
    add(f4_tool89_1.part, mode=Mode.SUBTRACT)


with BuildPart() as f4_tool101:
    # F4_s102 → F4_t103 (new body)
    with BuildSketch(Plane.XZ.offset(-15)):
        with BuildLine():
            ThreePointArc((-155, -75), (-147.9289321881, -72.0710678119), (-145, -65))
            Line((-145, -65), (-145, -75))
            Line((-145, -75), (-155, -75))
        make_face()
    extrude(amount=F4_T103_DEPTH)

    split(bisect_by=Plane.XZ.offset(10), keep=Keep.BOTTOM)

    split(bisect_by=Plane.XZ, keep=Keep.TOP)


with BuildPart() as f4_tool106:
    # F4_s107 → F4_t108 (new body)
    with BuildSketch(Plane.YZ.offset(-170)):
        with BuildLine():
            ThreePointArc((0, -75), (-7.0710678119, -72.0710678119), (-10, -65))
            Line((-10, -65), (-10, -75))
            Line((-10, -75), (0, -75))
        make_face()
    extrude(amount=F4_T108_DEPTH)

    split(bisect_by=Plane.YZ.offset(-145), keep=Keep.BOTTOM)


with BuildPart() as f4_tool101_1:
    add(f4_tool101.part)

    # F4_t110: intersect F4_tool106
    add(f4_tool106.part, mode=Mode.INTERSECT)


with BuildPart() as f1_13:
    add(f1_12.part)

    # F4_t99: cut F4_tool101
    add(f4_tool101_1.part, mode=Mode.SUBTRACT)


with BuildPart() as f4_tool113:
    # F4_s114 → F4_t115 (new body)
    with BuildSketch(Plane.YZ.offset(145)):
        with BuildLine():
            ThreePointArc((0, 75), (-7.0710678119, 72.0710678119), (-10, 65))
            Line((-10, 65), (-10, 75))
            Line((-10, 75), (0, 75))
        make_face()
    extrude(amount=-F4_T115_DEPTH)

    split(bisect_by=Plane.YZ.offset(-145), keep=Keep.BOTTOM)


with BuildPart() as f4_tool117:
    # F4_s118 → F4_t119 (new body)
    with BuildSketch(Plane.XZ.offset(-15)):
        with BuildLine():
            ThreePointArc((-155, 75), (-147.9289321881, 72.0710678119), (-145, 65))
            Line((-145, 65), (-145, 75))
            Line((-145, 75), (-155, 75))
        make_face()
    extrude(amount=F4_T119_DEPTH)

    split(bisect_by=Plane.XZ.offset(10), keep=Keep.BOTTOM)

    split(bisect_by=Plane.XZ, keep=Keep.TOP)


with BuildPart() as f4_tool113_1:
    add(f4_tool113.part)

    # F4_t122: intersect F4_tool117
    add(f4_tool117.part, mode=Mode.INTERSECT)


with BuildPart() as f1_14:
    add(f1_13.part)

    # F4_t111: cut F4_tool113
    add(f4_tool113_1.part, mode=Mode.SUBTRACT)


solid = f1_14.part
